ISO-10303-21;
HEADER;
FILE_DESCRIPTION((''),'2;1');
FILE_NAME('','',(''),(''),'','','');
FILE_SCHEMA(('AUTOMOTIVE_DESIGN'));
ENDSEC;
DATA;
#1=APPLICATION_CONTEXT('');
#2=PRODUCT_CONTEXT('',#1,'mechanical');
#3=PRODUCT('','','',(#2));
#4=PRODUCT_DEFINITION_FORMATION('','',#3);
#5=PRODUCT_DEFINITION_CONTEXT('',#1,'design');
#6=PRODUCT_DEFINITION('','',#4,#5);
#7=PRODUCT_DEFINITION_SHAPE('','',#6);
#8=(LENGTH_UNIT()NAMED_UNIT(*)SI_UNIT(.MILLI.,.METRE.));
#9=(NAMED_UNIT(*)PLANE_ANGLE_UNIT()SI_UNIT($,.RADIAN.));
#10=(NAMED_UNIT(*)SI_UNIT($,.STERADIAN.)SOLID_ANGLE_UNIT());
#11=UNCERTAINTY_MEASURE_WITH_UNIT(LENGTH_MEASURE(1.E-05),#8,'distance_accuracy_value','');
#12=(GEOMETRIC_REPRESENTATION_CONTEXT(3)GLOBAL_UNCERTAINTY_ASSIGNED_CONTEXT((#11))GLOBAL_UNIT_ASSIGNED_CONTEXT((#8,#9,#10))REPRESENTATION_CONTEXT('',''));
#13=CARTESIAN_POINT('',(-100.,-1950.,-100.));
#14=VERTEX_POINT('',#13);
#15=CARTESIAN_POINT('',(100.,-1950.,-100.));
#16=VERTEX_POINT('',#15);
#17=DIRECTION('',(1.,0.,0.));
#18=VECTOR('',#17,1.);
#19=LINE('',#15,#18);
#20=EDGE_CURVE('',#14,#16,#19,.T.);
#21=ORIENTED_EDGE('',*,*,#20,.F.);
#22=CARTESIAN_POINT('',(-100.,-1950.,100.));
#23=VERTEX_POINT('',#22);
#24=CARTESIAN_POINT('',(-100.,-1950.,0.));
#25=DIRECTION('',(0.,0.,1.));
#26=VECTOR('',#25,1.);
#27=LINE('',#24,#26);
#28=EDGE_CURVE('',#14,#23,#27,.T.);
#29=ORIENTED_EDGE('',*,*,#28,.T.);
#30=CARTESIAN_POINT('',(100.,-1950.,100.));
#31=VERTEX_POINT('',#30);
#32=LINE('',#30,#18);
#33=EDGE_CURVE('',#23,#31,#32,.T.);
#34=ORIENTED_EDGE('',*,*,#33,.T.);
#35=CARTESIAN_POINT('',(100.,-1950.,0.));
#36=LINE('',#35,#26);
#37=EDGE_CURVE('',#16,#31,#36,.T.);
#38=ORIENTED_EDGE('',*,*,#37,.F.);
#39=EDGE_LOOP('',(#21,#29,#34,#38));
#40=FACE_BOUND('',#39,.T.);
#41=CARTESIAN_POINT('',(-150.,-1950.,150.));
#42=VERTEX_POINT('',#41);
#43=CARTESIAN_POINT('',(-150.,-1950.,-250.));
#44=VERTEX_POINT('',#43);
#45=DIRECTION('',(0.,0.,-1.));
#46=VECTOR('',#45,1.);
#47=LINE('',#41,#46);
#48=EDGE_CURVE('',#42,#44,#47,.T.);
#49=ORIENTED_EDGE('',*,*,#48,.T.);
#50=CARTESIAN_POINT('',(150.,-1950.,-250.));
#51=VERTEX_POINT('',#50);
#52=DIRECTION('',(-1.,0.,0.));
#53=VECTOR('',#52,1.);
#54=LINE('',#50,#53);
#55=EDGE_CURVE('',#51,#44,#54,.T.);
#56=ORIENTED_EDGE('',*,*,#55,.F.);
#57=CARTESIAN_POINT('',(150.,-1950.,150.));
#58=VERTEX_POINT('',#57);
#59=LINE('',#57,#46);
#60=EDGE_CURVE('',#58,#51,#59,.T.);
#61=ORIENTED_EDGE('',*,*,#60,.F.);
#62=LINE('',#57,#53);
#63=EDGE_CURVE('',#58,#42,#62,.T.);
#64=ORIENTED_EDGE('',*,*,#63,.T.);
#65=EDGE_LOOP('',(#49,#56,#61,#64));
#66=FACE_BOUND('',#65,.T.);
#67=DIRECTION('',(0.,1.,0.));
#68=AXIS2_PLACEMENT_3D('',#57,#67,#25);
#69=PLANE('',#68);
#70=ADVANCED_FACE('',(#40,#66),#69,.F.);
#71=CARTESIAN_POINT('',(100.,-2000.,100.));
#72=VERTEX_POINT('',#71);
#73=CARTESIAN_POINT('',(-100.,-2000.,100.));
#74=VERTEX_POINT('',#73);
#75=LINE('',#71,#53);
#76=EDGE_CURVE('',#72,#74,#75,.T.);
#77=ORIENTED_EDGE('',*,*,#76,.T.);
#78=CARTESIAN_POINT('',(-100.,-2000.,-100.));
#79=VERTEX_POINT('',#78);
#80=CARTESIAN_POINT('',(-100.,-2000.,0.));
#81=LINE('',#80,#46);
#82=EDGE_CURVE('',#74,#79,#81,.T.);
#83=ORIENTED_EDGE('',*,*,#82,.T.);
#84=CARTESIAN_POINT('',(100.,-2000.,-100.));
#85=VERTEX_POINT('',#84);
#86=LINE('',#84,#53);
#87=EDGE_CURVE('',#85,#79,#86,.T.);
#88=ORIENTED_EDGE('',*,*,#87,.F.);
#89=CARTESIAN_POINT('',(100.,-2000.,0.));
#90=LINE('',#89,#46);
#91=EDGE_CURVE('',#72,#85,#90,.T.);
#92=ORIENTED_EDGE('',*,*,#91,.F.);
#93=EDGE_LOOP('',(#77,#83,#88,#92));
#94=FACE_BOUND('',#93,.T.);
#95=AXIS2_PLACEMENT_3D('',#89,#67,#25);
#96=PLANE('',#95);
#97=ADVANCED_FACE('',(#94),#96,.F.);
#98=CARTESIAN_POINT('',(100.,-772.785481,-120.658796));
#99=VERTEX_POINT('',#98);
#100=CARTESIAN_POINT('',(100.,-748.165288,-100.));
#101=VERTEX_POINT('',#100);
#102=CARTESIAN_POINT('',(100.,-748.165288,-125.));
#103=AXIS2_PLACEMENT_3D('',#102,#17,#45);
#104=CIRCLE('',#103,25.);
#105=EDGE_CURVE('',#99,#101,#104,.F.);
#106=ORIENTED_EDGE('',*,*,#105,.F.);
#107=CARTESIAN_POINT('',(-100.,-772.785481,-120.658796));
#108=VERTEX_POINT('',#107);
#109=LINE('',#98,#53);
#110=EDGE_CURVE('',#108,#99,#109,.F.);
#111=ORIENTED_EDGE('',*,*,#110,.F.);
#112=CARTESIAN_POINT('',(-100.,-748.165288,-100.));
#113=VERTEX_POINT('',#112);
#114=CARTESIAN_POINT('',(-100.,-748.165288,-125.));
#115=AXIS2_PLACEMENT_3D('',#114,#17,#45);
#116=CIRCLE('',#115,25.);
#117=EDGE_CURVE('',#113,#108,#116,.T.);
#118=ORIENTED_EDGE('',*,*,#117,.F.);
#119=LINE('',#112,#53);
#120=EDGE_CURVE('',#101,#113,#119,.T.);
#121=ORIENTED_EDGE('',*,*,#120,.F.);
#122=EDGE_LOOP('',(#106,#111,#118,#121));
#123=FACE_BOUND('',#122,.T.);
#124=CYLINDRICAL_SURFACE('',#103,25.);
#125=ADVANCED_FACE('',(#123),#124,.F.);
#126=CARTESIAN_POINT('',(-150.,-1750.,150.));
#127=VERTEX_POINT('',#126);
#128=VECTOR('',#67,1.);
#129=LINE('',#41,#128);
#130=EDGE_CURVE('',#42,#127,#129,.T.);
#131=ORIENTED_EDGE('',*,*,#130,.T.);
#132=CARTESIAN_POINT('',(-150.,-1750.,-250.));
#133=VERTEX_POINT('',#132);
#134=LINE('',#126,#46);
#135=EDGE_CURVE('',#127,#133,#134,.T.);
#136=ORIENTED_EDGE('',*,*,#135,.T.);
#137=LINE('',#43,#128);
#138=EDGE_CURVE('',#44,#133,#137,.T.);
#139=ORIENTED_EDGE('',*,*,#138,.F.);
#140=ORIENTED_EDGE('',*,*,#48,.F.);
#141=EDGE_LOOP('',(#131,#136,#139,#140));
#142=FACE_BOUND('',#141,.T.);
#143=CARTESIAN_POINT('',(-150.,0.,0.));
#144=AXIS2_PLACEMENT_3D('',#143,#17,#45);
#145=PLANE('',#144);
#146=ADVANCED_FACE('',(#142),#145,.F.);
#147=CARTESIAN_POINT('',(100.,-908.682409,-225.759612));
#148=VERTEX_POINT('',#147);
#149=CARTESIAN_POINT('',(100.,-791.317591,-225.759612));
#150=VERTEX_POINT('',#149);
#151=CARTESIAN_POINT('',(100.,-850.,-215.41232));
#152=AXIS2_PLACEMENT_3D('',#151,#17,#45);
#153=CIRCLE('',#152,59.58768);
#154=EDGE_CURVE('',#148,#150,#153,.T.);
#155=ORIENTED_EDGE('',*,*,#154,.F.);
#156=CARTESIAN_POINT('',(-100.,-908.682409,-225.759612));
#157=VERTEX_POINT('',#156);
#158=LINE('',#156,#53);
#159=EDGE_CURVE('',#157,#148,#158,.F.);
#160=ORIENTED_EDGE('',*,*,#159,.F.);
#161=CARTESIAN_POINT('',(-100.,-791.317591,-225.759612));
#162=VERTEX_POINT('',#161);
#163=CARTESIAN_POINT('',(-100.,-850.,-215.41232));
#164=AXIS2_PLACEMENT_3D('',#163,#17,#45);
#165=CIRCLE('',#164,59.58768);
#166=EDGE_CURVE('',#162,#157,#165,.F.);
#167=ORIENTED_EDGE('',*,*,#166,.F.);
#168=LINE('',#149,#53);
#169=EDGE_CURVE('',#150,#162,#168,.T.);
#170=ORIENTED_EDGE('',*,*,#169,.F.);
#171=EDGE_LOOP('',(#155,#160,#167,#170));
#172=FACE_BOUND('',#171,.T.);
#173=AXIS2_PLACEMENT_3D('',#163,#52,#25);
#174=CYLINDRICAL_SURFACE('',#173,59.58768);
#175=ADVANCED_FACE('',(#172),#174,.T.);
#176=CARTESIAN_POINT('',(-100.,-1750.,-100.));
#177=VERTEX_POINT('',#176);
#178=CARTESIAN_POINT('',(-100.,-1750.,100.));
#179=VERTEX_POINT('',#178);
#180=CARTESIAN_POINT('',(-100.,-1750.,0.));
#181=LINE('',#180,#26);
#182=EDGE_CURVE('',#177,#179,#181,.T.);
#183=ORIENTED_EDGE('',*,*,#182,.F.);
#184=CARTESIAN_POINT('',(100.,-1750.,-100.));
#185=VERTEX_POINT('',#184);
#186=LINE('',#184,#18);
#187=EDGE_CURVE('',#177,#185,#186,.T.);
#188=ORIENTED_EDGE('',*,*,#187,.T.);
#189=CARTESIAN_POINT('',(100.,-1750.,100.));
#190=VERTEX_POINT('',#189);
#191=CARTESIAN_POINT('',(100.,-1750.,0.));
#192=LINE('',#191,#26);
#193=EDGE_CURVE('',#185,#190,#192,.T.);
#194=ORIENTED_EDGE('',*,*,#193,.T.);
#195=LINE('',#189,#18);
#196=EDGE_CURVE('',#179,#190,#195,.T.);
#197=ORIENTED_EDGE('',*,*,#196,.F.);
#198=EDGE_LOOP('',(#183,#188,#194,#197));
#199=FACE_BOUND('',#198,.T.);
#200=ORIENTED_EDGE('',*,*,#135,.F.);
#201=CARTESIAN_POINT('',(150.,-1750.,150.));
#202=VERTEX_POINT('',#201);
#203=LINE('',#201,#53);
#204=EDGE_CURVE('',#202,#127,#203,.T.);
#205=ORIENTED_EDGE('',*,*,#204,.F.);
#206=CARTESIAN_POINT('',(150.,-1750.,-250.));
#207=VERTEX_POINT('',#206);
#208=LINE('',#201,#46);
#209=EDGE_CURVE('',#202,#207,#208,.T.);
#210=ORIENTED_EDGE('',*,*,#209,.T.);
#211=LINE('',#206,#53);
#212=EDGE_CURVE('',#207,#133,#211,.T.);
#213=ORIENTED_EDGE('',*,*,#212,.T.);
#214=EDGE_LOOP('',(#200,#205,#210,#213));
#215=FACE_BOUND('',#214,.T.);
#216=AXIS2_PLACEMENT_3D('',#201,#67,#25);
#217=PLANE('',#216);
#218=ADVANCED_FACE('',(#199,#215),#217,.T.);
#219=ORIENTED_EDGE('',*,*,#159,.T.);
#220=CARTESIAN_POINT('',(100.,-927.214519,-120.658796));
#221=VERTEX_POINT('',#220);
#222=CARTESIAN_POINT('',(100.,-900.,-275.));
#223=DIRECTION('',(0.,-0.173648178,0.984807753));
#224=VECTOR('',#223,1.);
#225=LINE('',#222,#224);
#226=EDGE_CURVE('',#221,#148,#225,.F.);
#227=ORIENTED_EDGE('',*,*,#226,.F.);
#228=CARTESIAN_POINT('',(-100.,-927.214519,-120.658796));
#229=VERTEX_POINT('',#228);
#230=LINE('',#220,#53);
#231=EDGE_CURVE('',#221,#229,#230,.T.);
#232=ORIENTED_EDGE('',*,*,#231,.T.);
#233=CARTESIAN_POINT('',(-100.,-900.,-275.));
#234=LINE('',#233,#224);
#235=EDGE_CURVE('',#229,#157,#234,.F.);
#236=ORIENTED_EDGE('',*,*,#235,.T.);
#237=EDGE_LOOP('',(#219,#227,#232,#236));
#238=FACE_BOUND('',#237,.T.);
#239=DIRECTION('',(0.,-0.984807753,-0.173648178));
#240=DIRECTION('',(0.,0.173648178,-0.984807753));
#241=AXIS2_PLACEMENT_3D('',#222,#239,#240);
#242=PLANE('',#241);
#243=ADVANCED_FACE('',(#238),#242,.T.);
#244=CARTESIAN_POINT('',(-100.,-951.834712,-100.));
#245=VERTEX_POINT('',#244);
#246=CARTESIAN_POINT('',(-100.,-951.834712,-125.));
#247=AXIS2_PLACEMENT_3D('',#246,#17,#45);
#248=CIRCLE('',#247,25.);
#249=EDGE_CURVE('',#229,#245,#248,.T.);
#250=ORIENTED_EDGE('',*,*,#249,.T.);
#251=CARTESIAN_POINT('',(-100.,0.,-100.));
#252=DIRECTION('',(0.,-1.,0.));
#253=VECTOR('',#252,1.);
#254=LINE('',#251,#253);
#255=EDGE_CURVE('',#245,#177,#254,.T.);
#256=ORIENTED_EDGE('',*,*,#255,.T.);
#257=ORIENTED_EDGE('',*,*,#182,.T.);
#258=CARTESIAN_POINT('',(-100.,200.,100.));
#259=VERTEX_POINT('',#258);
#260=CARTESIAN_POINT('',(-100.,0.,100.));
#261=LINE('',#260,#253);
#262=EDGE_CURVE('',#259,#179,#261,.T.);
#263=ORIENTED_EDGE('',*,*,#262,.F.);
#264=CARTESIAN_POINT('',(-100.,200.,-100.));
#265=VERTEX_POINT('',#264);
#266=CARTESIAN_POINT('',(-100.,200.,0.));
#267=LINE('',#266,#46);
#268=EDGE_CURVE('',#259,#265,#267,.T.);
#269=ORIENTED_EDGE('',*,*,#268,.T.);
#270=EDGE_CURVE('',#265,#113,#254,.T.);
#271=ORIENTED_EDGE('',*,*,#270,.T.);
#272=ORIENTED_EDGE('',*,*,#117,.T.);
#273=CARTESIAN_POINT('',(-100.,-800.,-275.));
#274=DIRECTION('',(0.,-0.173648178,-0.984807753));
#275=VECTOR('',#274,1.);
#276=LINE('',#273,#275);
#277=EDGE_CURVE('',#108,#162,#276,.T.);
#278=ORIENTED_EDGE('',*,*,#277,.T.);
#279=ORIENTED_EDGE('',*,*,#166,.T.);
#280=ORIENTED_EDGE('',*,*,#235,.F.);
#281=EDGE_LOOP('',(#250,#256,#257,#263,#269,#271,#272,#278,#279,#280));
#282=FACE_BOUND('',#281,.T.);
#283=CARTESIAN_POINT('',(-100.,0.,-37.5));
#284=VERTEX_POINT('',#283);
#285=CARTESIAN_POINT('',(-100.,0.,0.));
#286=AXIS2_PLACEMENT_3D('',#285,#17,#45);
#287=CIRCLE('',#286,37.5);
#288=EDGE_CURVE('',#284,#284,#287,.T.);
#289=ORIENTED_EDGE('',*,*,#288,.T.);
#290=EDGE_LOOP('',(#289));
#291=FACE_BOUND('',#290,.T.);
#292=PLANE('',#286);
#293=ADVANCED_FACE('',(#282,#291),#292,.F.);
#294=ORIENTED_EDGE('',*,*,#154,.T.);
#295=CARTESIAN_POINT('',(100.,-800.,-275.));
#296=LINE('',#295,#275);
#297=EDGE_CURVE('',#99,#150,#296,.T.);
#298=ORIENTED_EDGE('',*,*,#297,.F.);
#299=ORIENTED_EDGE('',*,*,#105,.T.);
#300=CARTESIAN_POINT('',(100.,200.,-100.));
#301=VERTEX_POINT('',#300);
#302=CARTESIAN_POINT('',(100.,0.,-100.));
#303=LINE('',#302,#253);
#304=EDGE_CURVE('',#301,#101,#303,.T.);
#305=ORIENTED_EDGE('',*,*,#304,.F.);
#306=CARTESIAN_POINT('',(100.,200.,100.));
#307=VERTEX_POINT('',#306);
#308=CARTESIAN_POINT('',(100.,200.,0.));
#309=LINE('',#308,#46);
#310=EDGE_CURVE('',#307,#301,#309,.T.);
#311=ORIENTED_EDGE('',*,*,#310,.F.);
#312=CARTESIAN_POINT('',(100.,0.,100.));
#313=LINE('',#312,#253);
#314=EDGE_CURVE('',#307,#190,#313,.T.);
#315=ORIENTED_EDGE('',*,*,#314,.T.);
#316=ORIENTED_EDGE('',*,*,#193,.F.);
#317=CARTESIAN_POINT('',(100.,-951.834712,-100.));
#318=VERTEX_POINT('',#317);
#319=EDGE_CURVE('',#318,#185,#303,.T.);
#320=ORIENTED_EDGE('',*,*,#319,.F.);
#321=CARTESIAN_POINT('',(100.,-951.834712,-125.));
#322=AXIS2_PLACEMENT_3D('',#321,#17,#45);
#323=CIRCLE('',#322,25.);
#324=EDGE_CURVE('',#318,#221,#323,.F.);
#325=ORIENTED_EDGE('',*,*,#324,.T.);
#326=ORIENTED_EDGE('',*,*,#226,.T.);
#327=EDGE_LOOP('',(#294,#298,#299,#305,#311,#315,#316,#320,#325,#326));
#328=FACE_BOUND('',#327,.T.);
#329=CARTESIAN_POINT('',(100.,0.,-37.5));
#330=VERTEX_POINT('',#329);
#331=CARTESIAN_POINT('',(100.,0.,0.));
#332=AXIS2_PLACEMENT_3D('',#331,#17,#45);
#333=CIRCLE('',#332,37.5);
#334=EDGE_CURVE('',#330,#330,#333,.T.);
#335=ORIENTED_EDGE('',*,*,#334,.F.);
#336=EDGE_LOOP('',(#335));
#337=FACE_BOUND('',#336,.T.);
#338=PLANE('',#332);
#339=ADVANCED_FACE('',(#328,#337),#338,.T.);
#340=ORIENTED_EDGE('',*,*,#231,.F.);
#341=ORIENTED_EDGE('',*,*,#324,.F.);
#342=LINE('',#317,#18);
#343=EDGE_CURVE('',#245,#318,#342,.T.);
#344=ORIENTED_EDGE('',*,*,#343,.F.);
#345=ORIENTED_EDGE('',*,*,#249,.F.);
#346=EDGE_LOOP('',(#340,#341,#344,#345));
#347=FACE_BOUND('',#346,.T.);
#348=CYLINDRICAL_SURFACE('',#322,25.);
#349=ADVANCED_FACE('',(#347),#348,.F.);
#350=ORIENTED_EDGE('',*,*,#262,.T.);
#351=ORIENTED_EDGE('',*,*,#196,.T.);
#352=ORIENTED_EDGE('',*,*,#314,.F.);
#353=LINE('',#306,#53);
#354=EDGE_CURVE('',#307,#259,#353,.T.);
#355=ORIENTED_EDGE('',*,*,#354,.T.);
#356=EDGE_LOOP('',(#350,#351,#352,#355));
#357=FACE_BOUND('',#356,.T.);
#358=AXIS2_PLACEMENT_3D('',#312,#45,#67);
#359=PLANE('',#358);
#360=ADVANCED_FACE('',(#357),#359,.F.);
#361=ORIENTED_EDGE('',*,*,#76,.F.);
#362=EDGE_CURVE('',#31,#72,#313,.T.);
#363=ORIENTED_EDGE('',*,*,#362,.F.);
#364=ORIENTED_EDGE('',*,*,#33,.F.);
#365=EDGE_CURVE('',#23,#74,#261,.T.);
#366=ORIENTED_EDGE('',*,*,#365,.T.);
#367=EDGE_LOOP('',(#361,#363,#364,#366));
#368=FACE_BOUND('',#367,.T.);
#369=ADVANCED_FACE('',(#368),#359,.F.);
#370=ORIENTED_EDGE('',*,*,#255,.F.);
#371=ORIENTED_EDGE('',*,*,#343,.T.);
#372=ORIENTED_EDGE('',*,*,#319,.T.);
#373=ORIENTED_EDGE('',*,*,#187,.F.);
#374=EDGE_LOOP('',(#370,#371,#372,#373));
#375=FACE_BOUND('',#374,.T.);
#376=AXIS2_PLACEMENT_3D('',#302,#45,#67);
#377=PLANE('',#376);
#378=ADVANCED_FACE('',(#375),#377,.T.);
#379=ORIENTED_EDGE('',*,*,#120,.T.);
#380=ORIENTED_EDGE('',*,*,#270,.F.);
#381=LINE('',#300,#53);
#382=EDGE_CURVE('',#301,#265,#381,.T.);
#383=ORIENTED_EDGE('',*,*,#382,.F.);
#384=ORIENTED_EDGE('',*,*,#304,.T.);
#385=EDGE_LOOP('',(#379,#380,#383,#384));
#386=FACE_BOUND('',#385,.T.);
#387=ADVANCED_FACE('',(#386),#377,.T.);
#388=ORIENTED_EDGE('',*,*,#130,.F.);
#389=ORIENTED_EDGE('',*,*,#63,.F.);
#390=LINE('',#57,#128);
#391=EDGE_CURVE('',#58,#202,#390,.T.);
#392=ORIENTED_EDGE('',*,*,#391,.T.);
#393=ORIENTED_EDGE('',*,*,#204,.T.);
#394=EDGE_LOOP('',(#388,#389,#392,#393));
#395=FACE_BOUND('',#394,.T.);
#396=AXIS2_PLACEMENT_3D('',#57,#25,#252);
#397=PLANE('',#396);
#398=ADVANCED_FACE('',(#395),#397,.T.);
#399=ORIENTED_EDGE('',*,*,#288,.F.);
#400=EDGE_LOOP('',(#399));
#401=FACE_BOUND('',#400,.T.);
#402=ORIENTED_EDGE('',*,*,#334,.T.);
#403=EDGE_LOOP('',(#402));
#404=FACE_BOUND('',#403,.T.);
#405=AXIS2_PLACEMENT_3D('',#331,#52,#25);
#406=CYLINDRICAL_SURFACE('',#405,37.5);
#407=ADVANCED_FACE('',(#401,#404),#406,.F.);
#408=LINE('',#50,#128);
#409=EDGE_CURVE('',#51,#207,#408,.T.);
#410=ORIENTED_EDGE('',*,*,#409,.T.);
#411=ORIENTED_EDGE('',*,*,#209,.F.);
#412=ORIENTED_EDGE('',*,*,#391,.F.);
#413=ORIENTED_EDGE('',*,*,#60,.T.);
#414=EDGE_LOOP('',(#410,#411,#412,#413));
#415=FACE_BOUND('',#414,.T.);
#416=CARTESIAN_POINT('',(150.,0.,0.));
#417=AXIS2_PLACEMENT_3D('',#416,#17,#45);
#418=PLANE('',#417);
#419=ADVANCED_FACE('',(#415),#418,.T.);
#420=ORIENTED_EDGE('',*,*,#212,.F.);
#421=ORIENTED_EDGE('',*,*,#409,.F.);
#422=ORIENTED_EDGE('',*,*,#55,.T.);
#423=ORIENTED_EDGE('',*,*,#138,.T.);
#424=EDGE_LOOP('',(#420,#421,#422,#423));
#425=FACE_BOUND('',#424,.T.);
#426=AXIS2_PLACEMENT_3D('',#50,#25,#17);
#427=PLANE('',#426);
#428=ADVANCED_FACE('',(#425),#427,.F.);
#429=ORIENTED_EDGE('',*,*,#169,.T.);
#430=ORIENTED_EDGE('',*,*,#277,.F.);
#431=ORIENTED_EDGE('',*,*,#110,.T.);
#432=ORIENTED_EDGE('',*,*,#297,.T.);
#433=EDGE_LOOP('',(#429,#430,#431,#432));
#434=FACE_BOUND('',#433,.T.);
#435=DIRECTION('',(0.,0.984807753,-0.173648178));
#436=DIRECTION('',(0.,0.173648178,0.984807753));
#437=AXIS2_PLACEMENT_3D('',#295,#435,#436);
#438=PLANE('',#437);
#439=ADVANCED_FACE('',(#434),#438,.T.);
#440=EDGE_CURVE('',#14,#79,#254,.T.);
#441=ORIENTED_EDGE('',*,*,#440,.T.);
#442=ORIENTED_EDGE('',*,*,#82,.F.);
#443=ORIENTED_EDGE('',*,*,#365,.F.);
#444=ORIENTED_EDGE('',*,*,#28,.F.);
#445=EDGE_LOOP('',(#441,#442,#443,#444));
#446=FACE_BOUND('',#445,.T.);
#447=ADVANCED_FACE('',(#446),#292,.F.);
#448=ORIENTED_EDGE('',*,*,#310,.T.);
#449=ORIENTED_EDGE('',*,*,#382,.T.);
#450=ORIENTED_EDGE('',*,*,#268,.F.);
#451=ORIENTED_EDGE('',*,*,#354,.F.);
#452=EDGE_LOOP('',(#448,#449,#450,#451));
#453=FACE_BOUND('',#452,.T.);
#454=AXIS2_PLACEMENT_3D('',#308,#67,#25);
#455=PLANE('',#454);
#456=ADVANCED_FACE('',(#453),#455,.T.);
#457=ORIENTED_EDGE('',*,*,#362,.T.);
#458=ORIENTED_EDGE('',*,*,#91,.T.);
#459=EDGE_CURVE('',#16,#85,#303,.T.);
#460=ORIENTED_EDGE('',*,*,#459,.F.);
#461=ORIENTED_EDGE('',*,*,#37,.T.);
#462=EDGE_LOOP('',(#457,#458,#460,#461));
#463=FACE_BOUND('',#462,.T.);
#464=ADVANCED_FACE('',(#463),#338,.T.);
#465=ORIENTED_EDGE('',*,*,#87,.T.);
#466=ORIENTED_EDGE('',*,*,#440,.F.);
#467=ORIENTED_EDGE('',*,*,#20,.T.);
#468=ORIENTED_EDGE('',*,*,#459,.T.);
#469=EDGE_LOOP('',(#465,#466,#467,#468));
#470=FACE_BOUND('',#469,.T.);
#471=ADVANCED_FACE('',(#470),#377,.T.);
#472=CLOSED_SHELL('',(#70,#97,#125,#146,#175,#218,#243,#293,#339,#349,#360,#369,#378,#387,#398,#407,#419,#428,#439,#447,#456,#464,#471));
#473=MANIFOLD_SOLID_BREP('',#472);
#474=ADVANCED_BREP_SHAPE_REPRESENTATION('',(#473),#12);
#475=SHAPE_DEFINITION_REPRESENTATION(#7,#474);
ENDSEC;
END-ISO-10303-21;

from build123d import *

# Parameters (mm, degrees)
SKETCH1_R           = 37.5
BOSS_EXTRUDE1_DEPTH = 100
DRAFT1_ANGLE        = 10
SKETCH1_3_W         = 200
SKETCH1_3_H         = 400
BOSS_EXTRUDE2_DEPTH = 150
FILLET1_R           = 59.58768
FILLET2_R           = 25


with BuildPart() as part:
    # Sketch1 → Boss-Extrude1 (new, symmetric)
    with BuildSketch(Plane.YZ):
        Polygon((-900, -100), (-2000, -100), (-2000, 100), (200, 100), (200, -100), (-800, -100), (-800, -275), (-900, -275), align=None)
        with Locations(Location((0, 0, 0), (0, 0, 270))):
            Circle(SKETCH1_R, mode=Mode.SUBTRACT)
    extrude(amount=BOSS_EXTRUDE1_DEPTH, both=True)

    # Draft1
    draft1_faces = [part.faces().sort_by_distance(p)[0] for p in [
        (0, -800, -187.5),
        (0, -900, -187.5),
    ]]
    draft(draft1_faces, Plane(origin=(100, 0, -275), x_dir=(-1, 0, 0), z_dir=(0, 0, -1)), DRAFT1_ANGLE)

    # Sketch1<3> → Boss-Extrude2 (add, symmetric)
    with BuildSketch(Plane.YZ):
        with Locations((-1850, -50)):
            Rectangle(SKETCH1_3_W, SKETCH1_3_H)
    extrude(amount=BOSS_EXTRUDE2_DEPTH, both=True)

    # Fillet1
    fillet1_edges = [part.edges().sort_by_distance(p)[0] for p in [
        (0, -800, -275),
        (0, -900, -275),
    ]]
    fillet(fillet1_edges, radius=FILLET1_R - 0.0001)  # a hair under: the kernel refuses the full size

    # Fillet2
    fillet2_edges = [part.edges().sort_by_distance(p)[0] for p in [
        (0, -769.142778376, -100),
        (0, -930.857221624, -100),
    ]]
    fillet(fillet2_edges, radius=FILLET2_R)


solid = part.part
